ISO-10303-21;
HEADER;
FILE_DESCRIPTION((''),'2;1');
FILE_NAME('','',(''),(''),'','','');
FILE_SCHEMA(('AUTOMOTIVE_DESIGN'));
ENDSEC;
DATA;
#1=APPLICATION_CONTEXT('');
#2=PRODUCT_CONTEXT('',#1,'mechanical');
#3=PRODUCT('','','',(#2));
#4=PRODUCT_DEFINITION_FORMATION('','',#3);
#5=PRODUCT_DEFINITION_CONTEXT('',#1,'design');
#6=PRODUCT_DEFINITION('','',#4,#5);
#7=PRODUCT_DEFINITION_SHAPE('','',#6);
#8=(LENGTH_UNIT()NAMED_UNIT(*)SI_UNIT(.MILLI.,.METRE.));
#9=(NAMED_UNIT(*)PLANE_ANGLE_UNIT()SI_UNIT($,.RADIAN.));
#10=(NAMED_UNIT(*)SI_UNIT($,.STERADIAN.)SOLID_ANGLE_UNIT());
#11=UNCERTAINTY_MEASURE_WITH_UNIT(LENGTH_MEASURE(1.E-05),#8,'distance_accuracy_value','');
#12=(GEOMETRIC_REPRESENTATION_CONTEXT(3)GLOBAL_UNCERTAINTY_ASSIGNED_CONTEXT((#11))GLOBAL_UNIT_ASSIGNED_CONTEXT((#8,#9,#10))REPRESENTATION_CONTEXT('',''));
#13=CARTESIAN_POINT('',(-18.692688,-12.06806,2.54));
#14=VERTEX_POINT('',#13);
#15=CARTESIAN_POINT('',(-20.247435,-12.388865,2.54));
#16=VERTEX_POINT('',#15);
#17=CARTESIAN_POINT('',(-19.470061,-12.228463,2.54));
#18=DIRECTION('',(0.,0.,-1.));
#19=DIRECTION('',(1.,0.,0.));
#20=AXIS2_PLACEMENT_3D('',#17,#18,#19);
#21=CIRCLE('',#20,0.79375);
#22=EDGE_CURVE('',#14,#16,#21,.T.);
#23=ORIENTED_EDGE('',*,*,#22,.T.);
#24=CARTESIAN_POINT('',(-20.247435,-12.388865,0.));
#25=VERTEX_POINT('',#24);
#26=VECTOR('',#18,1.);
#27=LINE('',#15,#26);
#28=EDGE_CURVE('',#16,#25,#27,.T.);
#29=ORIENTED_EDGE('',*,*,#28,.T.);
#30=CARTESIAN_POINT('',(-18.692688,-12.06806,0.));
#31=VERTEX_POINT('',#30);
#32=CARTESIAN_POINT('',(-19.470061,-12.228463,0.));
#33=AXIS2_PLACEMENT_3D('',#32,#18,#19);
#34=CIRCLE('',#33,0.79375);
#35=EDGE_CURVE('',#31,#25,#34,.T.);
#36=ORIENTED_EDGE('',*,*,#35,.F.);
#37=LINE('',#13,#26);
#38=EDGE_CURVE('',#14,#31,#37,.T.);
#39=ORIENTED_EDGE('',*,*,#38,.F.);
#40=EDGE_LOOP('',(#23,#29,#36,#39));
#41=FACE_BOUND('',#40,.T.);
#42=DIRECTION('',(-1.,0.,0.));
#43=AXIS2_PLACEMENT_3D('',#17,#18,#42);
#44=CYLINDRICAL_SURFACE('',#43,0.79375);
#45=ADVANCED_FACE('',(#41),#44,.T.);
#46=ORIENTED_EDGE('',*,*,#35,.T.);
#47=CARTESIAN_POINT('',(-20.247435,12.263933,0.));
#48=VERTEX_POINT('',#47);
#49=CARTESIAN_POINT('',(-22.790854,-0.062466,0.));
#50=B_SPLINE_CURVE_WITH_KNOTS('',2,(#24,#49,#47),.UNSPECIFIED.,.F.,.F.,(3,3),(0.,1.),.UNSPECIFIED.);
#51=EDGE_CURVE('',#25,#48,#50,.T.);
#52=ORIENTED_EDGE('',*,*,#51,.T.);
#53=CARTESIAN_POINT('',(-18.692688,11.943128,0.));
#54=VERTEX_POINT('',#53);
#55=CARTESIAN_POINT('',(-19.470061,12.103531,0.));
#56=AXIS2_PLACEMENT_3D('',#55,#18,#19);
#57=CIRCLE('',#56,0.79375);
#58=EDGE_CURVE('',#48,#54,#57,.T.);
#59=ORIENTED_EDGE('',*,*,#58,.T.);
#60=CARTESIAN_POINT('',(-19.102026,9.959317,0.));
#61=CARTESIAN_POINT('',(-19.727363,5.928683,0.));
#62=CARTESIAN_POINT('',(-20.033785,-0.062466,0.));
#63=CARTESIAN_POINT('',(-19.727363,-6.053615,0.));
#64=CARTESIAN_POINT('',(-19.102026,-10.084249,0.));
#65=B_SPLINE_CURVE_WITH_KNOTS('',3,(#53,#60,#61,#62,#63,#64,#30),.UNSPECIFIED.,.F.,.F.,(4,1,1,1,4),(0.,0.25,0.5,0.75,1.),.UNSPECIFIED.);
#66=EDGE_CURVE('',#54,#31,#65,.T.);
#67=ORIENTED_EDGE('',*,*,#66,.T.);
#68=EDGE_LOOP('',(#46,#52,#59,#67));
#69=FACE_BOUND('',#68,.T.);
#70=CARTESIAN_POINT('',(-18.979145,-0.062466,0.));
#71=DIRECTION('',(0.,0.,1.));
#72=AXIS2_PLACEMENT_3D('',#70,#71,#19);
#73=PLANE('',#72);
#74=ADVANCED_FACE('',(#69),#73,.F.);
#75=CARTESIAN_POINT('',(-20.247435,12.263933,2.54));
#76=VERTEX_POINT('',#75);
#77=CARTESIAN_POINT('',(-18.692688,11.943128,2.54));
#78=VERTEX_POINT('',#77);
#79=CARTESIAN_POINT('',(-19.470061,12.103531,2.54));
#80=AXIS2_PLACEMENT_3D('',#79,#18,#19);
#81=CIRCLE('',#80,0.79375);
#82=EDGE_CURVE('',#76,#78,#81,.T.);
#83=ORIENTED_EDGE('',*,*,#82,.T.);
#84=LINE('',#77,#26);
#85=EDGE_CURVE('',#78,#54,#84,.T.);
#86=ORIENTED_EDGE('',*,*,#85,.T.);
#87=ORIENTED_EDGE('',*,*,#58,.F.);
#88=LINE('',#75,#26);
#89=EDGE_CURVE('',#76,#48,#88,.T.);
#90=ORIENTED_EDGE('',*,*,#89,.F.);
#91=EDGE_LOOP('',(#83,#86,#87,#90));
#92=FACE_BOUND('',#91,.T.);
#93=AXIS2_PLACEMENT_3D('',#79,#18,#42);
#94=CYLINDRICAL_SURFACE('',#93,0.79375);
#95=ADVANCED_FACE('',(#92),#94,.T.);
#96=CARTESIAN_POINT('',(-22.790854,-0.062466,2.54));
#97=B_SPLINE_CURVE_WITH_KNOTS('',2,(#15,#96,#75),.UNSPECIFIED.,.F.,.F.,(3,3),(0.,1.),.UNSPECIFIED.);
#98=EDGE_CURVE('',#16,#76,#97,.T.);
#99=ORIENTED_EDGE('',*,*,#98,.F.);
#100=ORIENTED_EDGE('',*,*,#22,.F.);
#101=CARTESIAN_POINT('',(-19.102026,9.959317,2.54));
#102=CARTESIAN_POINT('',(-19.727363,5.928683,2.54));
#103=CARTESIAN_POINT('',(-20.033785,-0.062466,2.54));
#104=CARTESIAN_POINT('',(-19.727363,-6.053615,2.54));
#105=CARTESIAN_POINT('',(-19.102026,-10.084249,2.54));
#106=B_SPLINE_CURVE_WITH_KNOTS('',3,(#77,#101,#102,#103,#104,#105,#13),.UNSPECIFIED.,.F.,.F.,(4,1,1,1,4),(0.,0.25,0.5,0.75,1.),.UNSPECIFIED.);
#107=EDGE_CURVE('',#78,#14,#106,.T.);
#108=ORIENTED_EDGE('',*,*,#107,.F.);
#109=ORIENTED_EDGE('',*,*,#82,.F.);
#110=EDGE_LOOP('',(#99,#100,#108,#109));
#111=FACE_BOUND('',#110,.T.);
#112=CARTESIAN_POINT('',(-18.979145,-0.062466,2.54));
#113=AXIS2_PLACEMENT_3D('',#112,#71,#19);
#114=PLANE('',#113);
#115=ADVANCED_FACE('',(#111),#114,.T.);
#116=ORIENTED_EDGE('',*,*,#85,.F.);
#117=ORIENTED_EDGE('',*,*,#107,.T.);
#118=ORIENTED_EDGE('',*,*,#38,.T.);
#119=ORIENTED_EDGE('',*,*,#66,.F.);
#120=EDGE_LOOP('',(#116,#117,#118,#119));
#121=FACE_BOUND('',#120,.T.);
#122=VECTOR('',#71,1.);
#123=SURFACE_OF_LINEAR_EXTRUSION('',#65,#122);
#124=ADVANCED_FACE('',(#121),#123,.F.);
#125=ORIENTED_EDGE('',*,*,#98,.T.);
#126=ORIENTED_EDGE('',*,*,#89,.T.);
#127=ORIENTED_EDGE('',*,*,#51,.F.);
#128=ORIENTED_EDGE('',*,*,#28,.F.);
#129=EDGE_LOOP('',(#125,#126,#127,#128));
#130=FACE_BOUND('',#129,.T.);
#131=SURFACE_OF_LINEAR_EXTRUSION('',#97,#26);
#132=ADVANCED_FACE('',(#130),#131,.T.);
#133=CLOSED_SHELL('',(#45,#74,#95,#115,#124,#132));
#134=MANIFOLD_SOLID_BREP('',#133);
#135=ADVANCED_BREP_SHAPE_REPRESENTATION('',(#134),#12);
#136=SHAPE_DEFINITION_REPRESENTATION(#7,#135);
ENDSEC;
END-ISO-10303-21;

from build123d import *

# Parameters (mm, degrees)
EXTRUDE_THIN1_DEPTH = 2.54
CUT_EXTRUDE2_DEPTH  = 2.54


# Read off the part's stored shape, not the designer's step: Extrude-Thin1
with BuildPart() as part:
    # Extrude-Thin1 outline → Extrude-Thin1 (new body)
    with BuildSketch(Plane.XY):
        with BuildLine():
            Line((-18.692687667, -12.068059878), (-17.759839079, -11.875576731))
            add(Edge.make_bspline(
                [(-17.759839079, -11.875576731), (-18.573783236, -7.930886077), (-18.979144718, -3.99656527), (-18.979144707, 3.871633241), (-18.573783214, 7.805954051), (-17.759839047, 11.750644712)],
                knots=[0, 0, 0, 0, 0.5, 0.5, 1, 1, 1, 1], degree=3))
            Line((-17.759839047, 11.750644712), (-18.692687625, 11.943127906))
            ThreePointArc((-18.692687625, 11.943127906), (-19.309658792, 12.880904316), (-20.247435255, 12.26393323))
            add(Edge.make_bspline(
                [(-20.247435289, -12.388865244), (-22.790854154, -0.062466015), (-20.247435255, 12.26393323)],
                knots=[0, 0, 0, 1, 1, 1], degree=2))
            ThreePointArc((-20.247435289, -12.388865244), (-19.309658791, -13.005836389), (-18.692687667, -12.068059878))
        make_face()
    extrude(amount=EXTRUDE_THIN1_DEPTH)

    # Sketch2 → Cut-Extrude2 (cut)
    with BuildSketch(Plane.XY.offset(2.54)):
        with BuildLine():
            Line((-18.692687658, -12.068059924), (-17.759839079, -11.875576731))
            add(Edge.make_bspline(
                [(-17.759839079, -11.875576731), (-20.198448987, -0.061149061), (-17.759839047, 11.750644712)],
                knots=[0, 0, 0, 1, 1, 1], degree=2))
            Line((-17.759839047, 11.750644712), (-18.692687625, 11.943127906))
            add(Edge.make_bspline(
                [(-18.692687625, 11.943127906), (-19.102025507, 9.959316995), (-19.727363165, 5.928682969), (-20.033785482, -0.06246601), (-19.727363182, -6.053614989), (-19.102025535, -10.084249013), (-18.692687658, -12.068059924)],
                knots=[0, 0, 0, 0, 0.25, 0.5, 0.75, 1, 1, 1, 1], degree=3))
        make_face()
    extrude(amount=-CUT_EXTRUDE2_DEPTH, mode=Mode.SUBTRACT)


with BuildPart() as cut_extrude2_kept_piece:
    # of the separate pieces the step leaves, the one the design keeps (cut_extrude2_pieces_kept)
    add(part.part.solids().sort_by_distance((-20.247435289, -12.388865244, 0))[0])


solid = cut_extrude2_kept_piece.part
